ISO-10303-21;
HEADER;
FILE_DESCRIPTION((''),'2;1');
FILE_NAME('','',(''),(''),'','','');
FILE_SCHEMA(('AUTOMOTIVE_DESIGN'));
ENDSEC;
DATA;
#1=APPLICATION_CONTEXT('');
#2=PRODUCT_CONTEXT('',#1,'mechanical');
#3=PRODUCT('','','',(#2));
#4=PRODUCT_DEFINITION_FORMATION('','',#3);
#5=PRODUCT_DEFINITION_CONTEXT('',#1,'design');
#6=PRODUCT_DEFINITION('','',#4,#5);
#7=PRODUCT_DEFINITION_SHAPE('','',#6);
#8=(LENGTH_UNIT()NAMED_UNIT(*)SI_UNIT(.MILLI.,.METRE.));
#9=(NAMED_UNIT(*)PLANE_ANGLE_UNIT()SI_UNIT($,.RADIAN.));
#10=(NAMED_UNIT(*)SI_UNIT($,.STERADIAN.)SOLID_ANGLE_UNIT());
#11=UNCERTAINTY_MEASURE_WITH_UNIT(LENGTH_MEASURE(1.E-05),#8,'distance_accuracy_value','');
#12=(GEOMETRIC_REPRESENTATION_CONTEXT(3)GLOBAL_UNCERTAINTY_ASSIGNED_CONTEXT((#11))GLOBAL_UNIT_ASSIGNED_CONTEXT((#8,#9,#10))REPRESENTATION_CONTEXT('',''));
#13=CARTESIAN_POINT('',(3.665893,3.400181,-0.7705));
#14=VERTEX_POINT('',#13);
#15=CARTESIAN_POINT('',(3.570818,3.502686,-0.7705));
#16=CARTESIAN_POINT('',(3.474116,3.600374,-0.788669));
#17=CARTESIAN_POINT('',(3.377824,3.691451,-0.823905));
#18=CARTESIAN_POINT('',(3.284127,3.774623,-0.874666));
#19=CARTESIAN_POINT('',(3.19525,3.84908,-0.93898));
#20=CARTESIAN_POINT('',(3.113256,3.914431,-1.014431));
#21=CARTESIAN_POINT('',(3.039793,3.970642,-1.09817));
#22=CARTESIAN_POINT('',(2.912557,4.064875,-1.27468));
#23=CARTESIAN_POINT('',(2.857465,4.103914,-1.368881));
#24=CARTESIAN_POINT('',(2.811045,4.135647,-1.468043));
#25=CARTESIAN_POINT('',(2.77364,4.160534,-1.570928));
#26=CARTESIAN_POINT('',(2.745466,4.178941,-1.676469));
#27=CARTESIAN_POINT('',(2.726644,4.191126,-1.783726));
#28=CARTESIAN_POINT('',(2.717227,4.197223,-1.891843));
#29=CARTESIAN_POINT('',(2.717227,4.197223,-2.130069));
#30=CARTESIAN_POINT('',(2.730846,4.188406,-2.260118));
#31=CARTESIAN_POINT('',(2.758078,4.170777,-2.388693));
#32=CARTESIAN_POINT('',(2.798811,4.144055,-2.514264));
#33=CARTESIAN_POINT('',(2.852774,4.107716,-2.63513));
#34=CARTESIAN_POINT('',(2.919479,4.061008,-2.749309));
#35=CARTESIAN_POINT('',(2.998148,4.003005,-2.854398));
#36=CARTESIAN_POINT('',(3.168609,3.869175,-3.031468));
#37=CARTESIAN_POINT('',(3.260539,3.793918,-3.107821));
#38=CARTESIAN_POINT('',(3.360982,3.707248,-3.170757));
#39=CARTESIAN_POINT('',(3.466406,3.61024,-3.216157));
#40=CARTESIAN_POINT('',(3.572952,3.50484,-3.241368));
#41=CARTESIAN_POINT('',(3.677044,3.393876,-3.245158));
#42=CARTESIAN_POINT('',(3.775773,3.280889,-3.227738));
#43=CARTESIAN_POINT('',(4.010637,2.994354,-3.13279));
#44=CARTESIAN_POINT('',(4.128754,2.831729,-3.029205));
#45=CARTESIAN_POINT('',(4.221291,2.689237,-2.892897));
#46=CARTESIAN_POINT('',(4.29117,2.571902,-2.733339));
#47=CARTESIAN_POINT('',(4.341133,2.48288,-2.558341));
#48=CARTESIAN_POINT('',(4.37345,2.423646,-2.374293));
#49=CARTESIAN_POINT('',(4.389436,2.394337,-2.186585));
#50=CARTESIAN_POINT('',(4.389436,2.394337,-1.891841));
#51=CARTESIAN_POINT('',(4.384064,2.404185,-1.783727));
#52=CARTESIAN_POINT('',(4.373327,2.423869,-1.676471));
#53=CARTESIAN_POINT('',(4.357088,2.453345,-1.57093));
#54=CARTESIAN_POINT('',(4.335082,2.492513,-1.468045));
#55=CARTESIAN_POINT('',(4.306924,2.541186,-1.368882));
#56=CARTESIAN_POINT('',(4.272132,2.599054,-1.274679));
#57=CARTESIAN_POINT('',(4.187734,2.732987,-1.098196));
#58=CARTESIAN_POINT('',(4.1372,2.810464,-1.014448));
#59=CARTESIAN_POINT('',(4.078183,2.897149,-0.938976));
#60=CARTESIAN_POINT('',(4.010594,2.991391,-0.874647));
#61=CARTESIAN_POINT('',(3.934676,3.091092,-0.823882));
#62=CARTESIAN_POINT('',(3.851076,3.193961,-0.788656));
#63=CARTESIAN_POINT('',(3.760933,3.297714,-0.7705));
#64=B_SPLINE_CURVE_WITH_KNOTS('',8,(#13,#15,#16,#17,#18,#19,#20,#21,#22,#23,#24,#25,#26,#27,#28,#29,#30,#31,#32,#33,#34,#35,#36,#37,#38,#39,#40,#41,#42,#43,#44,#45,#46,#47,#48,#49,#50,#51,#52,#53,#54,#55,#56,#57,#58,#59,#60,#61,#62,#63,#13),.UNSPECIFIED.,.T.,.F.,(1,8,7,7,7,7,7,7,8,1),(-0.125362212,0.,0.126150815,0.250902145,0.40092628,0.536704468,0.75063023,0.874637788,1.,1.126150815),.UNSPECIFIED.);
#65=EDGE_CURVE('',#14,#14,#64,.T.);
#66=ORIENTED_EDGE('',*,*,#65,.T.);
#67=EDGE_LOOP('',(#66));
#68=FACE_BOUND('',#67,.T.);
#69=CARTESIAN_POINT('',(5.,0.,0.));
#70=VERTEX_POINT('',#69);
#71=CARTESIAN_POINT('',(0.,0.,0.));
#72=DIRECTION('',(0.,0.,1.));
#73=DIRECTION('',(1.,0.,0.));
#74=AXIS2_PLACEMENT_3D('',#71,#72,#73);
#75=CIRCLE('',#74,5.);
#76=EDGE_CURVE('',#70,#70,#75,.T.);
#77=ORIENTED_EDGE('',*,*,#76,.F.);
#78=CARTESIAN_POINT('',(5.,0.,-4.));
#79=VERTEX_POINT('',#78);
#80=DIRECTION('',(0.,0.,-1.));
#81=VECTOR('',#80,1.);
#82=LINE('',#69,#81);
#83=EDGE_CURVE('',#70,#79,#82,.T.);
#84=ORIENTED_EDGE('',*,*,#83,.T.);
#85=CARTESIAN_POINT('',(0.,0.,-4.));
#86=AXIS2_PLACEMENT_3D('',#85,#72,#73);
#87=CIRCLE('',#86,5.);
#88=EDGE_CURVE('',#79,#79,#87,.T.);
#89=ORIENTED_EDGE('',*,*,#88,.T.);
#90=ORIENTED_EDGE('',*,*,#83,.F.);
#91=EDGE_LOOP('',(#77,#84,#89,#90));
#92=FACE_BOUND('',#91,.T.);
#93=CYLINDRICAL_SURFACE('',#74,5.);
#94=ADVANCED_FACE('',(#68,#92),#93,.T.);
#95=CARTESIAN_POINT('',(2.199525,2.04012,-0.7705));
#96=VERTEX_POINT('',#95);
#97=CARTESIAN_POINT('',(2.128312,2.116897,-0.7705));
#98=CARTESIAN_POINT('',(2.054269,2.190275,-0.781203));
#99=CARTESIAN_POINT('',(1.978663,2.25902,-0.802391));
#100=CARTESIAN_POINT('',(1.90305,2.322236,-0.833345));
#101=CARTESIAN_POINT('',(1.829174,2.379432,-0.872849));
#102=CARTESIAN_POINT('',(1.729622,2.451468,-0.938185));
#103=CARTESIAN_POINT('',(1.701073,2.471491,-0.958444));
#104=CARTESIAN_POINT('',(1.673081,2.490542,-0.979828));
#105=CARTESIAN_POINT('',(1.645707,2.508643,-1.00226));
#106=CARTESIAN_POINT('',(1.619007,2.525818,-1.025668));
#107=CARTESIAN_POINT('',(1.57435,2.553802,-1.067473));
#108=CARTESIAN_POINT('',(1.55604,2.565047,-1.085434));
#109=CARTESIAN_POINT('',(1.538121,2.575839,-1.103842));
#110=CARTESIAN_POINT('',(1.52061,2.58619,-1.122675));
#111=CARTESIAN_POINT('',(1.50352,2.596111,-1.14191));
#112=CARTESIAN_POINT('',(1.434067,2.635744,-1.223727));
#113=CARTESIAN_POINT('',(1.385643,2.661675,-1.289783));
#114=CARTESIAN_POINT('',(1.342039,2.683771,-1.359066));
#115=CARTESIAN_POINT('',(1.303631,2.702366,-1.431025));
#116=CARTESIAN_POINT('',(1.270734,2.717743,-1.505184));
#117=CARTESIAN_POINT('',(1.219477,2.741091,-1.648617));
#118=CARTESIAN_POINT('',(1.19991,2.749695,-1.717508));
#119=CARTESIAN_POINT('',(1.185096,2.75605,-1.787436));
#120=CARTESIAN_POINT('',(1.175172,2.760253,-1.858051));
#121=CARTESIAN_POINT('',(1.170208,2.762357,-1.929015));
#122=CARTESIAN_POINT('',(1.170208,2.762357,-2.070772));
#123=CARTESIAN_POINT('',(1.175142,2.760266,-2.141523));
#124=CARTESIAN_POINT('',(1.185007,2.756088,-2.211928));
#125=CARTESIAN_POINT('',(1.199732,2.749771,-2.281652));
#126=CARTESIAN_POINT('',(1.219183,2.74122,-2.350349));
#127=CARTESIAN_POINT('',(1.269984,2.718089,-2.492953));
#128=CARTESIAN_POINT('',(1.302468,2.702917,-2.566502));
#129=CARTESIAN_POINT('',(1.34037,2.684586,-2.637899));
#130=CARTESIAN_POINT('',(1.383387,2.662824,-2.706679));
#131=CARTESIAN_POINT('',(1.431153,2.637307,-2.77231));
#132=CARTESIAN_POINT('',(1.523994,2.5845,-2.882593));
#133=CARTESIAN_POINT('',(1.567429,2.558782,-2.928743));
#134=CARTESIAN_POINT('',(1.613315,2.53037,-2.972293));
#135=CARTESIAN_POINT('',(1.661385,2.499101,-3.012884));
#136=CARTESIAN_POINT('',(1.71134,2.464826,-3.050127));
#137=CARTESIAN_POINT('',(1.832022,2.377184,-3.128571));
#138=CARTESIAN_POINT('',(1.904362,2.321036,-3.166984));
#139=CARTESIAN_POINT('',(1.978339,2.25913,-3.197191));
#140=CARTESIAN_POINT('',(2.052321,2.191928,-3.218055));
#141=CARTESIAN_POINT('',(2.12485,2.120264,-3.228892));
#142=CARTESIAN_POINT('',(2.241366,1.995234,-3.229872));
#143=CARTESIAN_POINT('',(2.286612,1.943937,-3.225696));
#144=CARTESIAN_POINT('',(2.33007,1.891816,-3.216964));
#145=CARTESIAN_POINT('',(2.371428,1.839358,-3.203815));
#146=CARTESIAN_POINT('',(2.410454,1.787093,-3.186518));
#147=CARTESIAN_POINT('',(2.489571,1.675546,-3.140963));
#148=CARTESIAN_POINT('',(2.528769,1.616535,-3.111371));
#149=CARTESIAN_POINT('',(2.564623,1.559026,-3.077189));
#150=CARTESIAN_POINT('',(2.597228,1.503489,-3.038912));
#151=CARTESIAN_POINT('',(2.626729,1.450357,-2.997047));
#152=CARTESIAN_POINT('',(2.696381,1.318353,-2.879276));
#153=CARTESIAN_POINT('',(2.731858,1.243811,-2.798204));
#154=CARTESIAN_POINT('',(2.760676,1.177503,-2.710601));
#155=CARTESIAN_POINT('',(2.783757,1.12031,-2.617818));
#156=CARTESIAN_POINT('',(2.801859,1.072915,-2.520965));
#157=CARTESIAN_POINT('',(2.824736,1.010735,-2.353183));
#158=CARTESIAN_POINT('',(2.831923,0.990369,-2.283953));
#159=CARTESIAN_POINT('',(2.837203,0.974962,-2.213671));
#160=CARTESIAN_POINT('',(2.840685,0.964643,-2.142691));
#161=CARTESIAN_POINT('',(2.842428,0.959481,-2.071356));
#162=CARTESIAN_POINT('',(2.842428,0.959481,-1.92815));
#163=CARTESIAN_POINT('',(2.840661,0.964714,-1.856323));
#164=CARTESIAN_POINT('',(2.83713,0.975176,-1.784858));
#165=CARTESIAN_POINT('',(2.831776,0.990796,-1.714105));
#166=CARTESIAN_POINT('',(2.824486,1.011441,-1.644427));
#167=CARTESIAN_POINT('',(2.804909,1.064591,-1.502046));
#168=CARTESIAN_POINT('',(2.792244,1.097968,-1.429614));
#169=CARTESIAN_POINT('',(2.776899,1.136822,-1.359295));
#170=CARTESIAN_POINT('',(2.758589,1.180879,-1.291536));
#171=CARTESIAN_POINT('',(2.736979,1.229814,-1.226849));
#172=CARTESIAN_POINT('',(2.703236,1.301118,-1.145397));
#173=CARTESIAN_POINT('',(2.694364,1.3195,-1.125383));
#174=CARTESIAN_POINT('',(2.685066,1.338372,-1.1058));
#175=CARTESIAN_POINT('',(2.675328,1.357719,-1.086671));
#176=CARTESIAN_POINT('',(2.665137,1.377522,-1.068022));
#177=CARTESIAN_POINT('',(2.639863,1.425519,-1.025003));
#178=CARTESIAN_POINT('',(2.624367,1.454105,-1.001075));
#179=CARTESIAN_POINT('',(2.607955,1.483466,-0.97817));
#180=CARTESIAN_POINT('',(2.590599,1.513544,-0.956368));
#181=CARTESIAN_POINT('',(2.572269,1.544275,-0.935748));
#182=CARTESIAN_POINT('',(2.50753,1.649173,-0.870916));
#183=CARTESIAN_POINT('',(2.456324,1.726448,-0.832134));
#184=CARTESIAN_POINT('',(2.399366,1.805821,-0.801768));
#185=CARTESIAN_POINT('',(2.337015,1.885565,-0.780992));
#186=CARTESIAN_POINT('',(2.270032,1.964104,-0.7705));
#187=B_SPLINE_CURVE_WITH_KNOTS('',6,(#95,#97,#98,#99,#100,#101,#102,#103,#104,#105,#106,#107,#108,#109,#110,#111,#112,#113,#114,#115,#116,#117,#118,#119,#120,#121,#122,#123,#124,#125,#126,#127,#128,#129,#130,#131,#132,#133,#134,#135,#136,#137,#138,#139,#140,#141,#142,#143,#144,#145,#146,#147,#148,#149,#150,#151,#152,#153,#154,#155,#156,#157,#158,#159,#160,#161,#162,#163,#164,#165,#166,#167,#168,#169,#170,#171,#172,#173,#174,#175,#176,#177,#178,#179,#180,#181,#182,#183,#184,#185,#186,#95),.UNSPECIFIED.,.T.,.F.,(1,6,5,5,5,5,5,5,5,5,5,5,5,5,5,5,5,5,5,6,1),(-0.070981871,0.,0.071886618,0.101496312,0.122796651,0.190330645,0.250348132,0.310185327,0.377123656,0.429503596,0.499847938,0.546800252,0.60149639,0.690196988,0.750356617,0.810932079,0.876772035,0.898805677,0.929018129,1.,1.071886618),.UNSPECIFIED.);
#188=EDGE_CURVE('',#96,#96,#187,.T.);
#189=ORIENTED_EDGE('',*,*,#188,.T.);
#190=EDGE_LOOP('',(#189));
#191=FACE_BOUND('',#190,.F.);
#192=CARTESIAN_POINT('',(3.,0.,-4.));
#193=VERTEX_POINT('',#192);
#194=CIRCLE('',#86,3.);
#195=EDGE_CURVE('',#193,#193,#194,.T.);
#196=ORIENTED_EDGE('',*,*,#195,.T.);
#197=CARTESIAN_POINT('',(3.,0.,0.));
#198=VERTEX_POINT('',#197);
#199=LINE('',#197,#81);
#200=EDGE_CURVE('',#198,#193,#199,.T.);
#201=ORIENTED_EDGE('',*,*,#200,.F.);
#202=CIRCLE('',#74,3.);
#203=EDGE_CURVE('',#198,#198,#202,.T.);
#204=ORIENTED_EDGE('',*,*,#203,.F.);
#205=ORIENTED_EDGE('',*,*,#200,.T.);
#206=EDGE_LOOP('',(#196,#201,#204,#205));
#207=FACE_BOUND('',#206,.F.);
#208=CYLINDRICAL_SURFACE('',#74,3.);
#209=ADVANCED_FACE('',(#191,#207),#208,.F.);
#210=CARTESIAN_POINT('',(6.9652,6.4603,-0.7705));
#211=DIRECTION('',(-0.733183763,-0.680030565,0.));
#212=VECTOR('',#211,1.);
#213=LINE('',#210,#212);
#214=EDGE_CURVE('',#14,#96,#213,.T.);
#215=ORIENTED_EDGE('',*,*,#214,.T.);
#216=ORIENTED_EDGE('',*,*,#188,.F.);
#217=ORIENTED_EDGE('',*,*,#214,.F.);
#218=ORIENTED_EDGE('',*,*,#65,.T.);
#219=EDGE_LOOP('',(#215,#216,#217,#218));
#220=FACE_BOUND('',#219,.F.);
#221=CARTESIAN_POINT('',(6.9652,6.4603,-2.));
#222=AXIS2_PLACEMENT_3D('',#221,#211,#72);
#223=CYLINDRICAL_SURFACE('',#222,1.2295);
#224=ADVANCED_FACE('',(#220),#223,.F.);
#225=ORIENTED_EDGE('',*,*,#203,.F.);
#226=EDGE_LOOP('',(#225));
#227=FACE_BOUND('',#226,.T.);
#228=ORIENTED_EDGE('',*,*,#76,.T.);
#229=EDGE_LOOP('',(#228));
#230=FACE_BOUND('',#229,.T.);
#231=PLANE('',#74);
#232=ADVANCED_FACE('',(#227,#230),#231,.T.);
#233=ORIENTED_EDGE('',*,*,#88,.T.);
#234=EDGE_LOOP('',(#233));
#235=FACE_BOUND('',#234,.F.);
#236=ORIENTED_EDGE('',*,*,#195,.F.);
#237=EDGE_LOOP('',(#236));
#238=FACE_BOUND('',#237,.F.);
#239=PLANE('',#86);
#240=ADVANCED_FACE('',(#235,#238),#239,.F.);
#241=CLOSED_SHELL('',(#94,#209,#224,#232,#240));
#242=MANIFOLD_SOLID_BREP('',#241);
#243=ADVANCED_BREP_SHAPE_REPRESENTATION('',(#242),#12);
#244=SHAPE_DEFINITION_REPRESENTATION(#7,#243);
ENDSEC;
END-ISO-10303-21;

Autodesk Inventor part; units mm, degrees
ref_plane "YZ Plane" through (0, 0, 0) normal (1, 0, 0) x (0, 1, 0)
ref_plane "XZ Plane" through (0, 0, 0) normal (0, 1, 0) x (-1, 0, 0)
ref_plane "XY Plane" through (0, 0, 0) normal (0, 0, 1) x (1, 0, 0)
sketch "Skizze1" plane through (0, 0, 0) normal (0, 0, 1) x (1, 0, 0)
  circle A0 centre (0, 0) radius 3
  circle A1 centre (0, 0) radius 5
  dimension "d0" = 6
  dimension "d1" = 10
extrude "Extrusion1" add sketch "Skizze1" against normal blind 4
ref_plane "Arbeitsebene1" through (42.4595, -31.8083, 21.313) normal (-0.7331838, -0.6800306, 0) x (-0.6800306, 0.7331838, 0)
sketch "Skizze2" plane through (42.4595, -31.8083, 21.313) normal (-0.7331838, -0.6800306, 0) x (-0.6800306, 0.7331838, 0)
  line L0 (57.1951, 25.313) -> (47.1951, 25.313) projected
  line L1 (57.1951, 21.313) -> (47.1951, 21.313) projected
  line L2 (57.1951, 21.313) -> (57.1951, 25.313) projected
  line L3 (47.1951, 21.313) -> (47.1951, 25.313) projected
  line L4 (52.1951, 117.2) -> (52.1951, -24.2)
  line L5 (57.1951, 25.313) -> (47.1951, 21.313) construction
  point P0 (52.1951, 21.313)
  point P1 (52.1951, 23.313)
hole "Bohrung1" at (6.9652, 6.4603, -2) direction (-0.7331838, -0.6800306, 0) diameter 2.459 end up to surface thread size "M3x0.5" class "6H" standard "ANSI Metric M Profile"
properties part number "6mm Wellen klemme" material "Stahl"
